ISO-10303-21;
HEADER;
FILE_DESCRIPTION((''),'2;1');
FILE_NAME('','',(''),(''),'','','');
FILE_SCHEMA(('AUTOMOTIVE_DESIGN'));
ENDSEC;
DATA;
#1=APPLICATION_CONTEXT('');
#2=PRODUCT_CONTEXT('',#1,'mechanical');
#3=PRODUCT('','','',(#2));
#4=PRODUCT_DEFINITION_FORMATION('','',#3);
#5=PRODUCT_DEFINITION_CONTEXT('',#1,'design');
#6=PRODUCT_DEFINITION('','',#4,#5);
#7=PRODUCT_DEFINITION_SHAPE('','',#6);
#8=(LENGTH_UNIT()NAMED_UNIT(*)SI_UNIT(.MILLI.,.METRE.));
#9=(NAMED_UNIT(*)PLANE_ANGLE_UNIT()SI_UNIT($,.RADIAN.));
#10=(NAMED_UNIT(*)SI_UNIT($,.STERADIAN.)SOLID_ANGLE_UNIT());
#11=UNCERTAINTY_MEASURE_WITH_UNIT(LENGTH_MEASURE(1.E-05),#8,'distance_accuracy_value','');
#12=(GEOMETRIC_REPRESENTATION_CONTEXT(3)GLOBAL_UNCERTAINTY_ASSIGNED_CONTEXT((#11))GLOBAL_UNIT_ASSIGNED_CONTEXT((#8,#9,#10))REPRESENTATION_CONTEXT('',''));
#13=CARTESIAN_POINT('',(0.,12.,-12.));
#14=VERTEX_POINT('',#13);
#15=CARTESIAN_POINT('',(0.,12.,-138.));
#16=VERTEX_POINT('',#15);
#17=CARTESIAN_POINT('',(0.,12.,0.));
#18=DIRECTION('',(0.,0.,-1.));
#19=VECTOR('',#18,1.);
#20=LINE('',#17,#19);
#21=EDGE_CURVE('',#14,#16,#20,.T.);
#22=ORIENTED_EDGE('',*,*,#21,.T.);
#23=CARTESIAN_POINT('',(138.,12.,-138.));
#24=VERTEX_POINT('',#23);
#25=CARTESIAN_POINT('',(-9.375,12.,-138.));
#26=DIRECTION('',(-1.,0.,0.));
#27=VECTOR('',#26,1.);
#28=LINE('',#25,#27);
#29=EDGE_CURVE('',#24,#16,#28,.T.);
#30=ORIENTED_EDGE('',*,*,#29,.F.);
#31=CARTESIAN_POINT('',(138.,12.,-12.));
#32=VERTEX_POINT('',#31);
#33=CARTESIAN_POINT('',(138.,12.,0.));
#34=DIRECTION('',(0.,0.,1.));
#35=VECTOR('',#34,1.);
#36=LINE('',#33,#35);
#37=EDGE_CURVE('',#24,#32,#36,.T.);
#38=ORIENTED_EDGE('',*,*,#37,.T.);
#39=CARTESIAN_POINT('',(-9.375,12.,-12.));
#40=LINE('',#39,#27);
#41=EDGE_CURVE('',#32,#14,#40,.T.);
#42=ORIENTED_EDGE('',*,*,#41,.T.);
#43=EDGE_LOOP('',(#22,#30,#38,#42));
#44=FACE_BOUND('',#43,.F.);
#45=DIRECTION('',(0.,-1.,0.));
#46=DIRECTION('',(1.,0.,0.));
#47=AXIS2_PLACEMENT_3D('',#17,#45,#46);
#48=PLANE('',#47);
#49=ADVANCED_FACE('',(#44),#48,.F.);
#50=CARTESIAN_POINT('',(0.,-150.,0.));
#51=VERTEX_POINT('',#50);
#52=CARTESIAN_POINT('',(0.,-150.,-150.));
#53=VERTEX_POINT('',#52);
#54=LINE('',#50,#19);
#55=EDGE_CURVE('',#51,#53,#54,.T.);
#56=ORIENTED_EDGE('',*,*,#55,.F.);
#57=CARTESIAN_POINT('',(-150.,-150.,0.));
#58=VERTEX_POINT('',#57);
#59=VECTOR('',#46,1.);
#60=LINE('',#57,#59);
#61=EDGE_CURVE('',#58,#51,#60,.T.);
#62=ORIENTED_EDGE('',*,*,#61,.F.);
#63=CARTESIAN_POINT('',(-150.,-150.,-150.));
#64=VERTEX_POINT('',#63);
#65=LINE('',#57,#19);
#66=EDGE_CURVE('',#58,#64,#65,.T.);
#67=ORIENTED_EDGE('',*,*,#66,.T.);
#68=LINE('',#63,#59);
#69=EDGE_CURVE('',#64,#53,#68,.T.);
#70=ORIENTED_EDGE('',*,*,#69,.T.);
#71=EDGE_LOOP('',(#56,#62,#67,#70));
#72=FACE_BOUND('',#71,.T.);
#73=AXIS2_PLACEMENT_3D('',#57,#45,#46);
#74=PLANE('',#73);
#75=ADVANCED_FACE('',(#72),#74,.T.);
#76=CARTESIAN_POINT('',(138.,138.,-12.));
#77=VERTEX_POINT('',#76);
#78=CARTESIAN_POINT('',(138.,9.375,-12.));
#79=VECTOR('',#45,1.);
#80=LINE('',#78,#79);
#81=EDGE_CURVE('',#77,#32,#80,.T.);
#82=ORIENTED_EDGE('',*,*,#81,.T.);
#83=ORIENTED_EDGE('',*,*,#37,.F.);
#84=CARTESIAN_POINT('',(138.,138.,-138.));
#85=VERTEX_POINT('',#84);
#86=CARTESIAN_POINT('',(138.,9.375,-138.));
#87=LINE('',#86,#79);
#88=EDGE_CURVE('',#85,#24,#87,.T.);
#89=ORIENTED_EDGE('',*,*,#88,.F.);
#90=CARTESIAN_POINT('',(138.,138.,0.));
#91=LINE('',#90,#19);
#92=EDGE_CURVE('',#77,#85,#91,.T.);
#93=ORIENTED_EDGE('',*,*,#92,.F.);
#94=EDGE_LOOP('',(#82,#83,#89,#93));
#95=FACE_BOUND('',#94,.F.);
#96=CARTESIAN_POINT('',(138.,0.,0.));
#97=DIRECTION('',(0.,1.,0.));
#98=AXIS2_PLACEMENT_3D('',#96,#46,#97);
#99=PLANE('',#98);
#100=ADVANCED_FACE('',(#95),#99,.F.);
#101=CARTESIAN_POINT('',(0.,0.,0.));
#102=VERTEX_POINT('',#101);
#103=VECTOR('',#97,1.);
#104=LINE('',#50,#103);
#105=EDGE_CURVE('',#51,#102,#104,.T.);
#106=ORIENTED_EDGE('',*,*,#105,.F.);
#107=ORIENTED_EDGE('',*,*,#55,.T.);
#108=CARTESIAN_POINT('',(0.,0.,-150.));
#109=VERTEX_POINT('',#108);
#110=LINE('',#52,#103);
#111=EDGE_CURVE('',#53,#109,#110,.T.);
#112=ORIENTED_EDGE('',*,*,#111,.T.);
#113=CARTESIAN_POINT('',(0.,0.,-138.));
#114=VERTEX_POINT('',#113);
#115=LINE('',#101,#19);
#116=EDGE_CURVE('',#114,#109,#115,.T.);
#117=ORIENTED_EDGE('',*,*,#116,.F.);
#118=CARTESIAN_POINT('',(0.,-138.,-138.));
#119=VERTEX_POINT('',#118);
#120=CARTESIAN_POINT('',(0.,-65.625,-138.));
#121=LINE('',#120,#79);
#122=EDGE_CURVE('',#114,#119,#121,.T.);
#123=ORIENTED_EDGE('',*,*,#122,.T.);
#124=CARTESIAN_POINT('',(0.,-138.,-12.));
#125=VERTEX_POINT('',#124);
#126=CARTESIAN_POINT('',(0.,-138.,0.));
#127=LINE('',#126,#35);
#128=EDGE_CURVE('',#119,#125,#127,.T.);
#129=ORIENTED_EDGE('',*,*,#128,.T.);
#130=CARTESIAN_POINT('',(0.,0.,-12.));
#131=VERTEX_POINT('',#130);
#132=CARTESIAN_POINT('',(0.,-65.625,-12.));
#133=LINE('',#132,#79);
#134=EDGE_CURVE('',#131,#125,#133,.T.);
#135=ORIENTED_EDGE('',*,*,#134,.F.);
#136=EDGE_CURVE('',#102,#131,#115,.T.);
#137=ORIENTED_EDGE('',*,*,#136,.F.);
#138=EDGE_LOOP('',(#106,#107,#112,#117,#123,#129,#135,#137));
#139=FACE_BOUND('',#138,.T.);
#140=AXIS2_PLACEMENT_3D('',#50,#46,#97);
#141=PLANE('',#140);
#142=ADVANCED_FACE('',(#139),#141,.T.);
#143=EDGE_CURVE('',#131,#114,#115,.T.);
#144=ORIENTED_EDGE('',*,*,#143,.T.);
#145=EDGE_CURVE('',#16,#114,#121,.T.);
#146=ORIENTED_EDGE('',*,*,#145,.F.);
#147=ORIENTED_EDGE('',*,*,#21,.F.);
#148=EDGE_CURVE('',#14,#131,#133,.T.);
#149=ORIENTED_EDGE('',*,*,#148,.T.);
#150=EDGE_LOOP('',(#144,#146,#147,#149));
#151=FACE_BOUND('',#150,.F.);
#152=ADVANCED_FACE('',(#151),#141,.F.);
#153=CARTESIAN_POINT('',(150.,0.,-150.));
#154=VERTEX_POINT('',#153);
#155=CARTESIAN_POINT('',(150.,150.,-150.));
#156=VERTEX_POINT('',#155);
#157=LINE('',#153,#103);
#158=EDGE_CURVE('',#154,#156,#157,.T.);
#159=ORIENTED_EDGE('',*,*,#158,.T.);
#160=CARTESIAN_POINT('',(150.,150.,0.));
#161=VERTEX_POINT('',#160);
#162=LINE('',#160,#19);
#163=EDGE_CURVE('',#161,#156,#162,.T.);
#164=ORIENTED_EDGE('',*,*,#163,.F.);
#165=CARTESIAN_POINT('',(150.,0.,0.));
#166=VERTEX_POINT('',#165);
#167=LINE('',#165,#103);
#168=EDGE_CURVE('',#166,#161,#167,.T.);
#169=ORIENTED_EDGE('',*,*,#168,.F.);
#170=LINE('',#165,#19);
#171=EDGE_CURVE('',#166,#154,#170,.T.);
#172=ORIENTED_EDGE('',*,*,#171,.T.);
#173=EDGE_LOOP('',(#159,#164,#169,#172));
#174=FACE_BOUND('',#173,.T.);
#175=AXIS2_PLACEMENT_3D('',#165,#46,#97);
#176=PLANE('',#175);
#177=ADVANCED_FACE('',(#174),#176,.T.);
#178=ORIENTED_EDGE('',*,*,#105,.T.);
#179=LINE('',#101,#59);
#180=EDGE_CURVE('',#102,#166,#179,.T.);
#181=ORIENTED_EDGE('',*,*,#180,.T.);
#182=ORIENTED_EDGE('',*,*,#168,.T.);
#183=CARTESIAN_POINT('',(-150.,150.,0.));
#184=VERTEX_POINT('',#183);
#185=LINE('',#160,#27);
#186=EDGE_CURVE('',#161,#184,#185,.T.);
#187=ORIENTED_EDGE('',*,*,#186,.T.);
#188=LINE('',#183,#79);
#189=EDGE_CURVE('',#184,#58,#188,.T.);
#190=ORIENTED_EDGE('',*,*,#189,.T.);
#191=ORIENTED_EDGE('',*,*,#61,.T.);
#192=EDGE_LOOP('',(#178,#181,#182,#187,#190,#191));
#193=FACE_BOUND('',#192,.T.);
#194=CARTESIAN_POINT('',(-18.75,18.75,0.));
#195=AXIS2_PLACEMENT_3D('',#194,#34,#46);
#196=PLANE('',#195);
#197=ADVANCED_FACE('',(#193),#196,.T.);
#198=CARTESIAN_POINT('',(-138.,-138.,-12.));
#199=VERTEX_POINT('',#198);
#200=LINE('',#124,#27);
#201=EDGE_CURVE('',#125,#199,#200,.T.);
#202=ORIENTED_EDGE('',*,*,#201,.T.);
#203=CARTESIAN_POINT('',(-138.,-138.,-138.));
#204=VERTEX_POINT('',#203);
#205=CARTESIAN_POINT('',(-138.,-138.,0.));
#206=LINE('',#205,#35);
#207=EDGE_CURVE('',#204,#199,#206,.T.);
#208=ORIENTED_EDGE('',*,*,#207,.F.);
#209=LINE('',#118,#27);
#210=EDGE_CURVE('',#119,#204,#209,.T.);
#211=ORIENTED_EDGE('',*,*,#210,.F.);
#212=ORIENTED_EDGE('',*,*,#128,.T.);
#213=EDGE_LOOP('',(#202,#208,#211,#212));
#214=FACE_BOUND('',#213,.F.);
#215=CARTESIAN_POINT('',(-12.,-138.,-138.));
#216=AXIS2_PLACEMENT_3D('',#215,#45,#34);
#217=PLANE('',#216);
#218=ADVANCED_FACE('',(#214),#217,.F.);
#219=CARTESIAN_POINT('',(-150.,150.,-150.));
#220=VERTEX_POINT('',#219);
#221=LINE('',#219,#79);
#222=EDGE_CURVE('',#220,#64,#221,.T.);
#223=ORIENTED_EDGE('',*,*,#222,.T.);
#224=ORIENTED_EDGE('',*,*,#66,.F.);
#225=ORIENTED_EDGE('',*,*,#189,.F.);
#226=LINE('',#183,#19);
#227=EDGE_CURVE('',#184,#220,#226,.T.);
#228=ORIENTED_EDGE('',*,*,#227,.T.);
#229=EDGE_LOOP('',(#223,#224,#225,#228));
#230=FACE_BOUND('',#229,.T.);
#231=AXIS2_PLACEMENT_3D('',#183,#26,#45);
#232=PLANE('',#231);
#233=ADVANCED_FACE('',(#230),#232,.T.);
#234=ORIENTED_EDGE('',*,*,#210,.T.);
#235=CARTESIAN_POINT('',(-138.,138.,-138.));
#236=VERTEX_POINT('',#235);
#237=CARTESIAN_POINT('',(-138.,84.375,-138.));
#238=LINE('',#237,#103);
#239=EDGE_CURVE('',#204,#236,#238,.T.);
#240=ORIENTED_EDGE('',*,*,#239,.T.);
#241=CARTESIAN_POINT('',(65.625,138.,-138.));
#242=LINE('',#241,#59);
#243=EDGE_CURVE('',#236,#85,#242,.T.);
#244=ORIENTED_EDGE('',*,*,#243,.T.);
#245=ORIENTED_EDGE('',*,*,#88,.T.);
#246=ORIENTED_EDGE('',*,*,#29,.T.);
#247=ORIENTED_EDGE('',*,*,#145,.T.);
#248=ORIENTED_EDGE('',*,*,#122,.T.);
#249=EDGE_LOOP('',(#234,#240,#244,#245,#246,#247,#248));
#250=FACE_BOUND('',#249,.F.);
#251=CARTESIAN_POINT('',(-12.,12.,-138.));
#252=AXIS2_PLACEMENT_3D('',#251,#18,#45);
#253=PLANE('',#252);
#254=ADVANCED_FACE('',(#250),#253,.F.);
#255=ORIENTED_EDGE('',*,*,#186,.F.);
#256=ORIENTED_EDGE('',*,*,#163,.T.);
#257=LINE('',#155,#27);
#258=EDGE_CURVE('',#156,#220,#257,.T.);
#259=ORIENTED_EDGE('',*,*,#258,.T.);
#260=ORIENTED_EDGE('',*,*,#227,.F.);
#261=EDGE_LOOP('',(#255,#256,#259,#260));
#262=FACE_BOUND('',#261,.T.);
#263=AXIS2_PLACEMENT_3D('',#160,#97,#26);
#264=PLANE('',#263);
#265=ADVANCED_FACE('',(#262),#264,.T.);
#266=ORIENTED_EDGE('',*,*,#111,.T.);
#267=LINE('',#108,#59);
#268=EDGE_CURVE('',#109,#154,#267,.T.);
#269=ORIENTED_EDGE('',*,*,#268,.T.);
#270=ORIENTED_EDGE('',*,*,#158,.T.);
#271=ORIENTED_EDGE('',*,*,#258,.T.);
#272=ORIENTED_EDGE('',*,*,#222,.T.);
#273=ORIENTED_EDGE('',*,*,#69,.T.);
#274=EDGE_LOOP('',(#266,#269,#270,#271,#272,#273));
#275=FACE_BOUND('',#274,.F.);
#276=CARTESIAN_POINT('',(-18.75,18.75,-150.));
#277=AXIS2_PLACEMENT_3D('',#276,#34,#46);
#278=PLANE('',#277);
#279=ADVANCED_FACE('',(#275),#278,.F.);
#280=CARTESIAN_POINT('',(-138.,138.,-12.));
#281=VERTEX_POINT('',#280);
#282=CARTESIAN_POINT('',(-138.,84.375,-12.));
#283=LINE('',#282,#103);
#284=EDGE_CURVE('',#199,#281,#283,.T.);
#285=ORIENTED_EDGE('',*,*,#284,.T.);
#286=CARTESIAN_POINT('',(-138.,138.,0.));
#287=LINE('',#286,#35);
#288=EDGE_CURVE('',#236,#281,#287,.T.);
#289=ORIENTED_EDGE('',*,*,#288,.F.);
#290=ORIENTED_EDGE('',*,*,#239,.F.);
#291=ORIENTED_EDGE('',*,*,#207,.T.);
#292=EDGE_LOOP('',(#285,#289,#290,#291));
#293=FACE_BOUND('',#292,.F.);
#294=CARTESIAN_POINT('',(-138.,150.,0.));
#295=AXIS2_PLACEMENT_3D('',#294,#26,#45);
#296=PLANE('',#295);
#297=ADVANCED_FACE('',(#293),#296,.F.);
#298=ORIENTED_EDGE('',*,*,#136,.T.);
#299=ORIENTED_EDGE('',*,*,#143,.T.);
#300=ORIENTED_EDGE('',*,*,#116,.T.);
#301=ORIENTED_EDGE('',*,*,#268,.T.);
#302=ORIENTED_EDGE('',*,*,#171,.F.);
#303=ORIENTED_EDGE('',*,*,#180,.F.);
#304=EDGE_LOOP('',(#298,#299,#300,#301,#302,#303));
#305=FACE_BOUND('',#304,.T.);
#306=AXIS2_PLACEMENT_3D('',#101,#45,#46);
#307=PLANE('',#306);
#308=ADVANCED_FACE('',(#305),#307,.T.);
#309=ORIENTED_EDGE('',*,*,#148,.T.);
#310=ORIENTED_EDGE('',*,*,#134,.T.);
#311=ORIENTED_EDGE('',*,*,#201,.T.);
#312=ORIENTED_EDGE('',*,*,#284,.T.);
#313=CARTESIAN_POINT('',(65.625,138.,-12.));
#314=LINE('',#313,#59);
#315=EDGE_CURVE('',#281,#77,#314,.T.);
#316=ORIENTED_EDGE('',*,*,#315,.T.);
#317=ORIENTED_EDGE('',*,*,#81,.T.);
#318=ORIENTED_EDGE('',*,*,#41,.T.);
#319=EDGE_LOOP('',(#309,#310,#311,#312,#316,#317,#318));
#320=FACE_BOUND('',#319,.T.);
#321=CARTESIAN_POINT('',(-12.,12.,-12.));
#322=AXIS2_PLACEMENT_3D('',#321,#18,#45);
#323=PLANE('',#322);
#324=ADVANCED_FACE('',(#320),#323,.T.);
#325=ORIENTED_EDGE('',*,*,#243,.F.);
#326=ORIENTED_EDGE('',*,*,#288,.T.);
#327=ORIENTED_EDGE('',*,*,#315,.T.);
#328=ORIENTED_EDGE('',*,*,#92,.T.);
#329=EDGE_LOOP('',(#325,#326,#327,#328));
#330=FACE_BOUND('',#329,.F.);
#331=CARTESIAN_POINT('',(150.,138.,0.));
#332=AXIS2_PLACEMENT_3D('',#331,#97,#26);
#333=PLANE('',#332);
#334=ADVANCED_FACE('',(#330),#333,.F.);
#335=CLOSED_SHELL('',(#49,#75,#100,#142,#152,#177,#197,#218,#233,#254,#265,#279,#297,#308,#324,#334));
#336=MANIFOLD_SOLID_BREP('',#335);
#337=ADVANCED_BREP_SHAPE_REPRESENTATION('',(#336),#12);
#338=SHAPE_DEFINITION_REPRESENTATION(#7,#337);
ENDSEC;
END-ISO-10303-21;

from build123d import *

# Parameters (mm, degrees)
F1_DEPTH = 150
F2_T     = -12


# Not quite as in the source:
# - a shell that OpenCascade refuses in one call is made with other operations: the cavity is built on its own and cut out


with BuildPart() as f1:
    # F0 (on Top) → F1 (new body)
    with BuildSketch(Plane.XY):
        Polygon((150, 150), (-150, 150), (-150, -150), (0, -150), (0, 0), (150, 0), align=None)
    extrude(amount=-F1_DEPTH)

    # F2: a shell. OpenCascade refuses it in one call, so the cavity is built on its own and cut out:
    # the body offset inwards by the wall thickness, plus a prism from it out through each open face.
    f2_core = offset(f1.part, amount=F2_T, kind=Kind.INTERSECTION, mode=Mode.PRIVATE)
    f2_exits = [f2_core.faces().sort_by_distance(p)[0] for p in [
        (-12, -63, -75),
    ]]
    add(f2_core, mode=Mode.SUBTRACT)
    extrude(f2_exits, amount=-F2_T, mode=Mode.SUBTRACT)


solid = f1.part
